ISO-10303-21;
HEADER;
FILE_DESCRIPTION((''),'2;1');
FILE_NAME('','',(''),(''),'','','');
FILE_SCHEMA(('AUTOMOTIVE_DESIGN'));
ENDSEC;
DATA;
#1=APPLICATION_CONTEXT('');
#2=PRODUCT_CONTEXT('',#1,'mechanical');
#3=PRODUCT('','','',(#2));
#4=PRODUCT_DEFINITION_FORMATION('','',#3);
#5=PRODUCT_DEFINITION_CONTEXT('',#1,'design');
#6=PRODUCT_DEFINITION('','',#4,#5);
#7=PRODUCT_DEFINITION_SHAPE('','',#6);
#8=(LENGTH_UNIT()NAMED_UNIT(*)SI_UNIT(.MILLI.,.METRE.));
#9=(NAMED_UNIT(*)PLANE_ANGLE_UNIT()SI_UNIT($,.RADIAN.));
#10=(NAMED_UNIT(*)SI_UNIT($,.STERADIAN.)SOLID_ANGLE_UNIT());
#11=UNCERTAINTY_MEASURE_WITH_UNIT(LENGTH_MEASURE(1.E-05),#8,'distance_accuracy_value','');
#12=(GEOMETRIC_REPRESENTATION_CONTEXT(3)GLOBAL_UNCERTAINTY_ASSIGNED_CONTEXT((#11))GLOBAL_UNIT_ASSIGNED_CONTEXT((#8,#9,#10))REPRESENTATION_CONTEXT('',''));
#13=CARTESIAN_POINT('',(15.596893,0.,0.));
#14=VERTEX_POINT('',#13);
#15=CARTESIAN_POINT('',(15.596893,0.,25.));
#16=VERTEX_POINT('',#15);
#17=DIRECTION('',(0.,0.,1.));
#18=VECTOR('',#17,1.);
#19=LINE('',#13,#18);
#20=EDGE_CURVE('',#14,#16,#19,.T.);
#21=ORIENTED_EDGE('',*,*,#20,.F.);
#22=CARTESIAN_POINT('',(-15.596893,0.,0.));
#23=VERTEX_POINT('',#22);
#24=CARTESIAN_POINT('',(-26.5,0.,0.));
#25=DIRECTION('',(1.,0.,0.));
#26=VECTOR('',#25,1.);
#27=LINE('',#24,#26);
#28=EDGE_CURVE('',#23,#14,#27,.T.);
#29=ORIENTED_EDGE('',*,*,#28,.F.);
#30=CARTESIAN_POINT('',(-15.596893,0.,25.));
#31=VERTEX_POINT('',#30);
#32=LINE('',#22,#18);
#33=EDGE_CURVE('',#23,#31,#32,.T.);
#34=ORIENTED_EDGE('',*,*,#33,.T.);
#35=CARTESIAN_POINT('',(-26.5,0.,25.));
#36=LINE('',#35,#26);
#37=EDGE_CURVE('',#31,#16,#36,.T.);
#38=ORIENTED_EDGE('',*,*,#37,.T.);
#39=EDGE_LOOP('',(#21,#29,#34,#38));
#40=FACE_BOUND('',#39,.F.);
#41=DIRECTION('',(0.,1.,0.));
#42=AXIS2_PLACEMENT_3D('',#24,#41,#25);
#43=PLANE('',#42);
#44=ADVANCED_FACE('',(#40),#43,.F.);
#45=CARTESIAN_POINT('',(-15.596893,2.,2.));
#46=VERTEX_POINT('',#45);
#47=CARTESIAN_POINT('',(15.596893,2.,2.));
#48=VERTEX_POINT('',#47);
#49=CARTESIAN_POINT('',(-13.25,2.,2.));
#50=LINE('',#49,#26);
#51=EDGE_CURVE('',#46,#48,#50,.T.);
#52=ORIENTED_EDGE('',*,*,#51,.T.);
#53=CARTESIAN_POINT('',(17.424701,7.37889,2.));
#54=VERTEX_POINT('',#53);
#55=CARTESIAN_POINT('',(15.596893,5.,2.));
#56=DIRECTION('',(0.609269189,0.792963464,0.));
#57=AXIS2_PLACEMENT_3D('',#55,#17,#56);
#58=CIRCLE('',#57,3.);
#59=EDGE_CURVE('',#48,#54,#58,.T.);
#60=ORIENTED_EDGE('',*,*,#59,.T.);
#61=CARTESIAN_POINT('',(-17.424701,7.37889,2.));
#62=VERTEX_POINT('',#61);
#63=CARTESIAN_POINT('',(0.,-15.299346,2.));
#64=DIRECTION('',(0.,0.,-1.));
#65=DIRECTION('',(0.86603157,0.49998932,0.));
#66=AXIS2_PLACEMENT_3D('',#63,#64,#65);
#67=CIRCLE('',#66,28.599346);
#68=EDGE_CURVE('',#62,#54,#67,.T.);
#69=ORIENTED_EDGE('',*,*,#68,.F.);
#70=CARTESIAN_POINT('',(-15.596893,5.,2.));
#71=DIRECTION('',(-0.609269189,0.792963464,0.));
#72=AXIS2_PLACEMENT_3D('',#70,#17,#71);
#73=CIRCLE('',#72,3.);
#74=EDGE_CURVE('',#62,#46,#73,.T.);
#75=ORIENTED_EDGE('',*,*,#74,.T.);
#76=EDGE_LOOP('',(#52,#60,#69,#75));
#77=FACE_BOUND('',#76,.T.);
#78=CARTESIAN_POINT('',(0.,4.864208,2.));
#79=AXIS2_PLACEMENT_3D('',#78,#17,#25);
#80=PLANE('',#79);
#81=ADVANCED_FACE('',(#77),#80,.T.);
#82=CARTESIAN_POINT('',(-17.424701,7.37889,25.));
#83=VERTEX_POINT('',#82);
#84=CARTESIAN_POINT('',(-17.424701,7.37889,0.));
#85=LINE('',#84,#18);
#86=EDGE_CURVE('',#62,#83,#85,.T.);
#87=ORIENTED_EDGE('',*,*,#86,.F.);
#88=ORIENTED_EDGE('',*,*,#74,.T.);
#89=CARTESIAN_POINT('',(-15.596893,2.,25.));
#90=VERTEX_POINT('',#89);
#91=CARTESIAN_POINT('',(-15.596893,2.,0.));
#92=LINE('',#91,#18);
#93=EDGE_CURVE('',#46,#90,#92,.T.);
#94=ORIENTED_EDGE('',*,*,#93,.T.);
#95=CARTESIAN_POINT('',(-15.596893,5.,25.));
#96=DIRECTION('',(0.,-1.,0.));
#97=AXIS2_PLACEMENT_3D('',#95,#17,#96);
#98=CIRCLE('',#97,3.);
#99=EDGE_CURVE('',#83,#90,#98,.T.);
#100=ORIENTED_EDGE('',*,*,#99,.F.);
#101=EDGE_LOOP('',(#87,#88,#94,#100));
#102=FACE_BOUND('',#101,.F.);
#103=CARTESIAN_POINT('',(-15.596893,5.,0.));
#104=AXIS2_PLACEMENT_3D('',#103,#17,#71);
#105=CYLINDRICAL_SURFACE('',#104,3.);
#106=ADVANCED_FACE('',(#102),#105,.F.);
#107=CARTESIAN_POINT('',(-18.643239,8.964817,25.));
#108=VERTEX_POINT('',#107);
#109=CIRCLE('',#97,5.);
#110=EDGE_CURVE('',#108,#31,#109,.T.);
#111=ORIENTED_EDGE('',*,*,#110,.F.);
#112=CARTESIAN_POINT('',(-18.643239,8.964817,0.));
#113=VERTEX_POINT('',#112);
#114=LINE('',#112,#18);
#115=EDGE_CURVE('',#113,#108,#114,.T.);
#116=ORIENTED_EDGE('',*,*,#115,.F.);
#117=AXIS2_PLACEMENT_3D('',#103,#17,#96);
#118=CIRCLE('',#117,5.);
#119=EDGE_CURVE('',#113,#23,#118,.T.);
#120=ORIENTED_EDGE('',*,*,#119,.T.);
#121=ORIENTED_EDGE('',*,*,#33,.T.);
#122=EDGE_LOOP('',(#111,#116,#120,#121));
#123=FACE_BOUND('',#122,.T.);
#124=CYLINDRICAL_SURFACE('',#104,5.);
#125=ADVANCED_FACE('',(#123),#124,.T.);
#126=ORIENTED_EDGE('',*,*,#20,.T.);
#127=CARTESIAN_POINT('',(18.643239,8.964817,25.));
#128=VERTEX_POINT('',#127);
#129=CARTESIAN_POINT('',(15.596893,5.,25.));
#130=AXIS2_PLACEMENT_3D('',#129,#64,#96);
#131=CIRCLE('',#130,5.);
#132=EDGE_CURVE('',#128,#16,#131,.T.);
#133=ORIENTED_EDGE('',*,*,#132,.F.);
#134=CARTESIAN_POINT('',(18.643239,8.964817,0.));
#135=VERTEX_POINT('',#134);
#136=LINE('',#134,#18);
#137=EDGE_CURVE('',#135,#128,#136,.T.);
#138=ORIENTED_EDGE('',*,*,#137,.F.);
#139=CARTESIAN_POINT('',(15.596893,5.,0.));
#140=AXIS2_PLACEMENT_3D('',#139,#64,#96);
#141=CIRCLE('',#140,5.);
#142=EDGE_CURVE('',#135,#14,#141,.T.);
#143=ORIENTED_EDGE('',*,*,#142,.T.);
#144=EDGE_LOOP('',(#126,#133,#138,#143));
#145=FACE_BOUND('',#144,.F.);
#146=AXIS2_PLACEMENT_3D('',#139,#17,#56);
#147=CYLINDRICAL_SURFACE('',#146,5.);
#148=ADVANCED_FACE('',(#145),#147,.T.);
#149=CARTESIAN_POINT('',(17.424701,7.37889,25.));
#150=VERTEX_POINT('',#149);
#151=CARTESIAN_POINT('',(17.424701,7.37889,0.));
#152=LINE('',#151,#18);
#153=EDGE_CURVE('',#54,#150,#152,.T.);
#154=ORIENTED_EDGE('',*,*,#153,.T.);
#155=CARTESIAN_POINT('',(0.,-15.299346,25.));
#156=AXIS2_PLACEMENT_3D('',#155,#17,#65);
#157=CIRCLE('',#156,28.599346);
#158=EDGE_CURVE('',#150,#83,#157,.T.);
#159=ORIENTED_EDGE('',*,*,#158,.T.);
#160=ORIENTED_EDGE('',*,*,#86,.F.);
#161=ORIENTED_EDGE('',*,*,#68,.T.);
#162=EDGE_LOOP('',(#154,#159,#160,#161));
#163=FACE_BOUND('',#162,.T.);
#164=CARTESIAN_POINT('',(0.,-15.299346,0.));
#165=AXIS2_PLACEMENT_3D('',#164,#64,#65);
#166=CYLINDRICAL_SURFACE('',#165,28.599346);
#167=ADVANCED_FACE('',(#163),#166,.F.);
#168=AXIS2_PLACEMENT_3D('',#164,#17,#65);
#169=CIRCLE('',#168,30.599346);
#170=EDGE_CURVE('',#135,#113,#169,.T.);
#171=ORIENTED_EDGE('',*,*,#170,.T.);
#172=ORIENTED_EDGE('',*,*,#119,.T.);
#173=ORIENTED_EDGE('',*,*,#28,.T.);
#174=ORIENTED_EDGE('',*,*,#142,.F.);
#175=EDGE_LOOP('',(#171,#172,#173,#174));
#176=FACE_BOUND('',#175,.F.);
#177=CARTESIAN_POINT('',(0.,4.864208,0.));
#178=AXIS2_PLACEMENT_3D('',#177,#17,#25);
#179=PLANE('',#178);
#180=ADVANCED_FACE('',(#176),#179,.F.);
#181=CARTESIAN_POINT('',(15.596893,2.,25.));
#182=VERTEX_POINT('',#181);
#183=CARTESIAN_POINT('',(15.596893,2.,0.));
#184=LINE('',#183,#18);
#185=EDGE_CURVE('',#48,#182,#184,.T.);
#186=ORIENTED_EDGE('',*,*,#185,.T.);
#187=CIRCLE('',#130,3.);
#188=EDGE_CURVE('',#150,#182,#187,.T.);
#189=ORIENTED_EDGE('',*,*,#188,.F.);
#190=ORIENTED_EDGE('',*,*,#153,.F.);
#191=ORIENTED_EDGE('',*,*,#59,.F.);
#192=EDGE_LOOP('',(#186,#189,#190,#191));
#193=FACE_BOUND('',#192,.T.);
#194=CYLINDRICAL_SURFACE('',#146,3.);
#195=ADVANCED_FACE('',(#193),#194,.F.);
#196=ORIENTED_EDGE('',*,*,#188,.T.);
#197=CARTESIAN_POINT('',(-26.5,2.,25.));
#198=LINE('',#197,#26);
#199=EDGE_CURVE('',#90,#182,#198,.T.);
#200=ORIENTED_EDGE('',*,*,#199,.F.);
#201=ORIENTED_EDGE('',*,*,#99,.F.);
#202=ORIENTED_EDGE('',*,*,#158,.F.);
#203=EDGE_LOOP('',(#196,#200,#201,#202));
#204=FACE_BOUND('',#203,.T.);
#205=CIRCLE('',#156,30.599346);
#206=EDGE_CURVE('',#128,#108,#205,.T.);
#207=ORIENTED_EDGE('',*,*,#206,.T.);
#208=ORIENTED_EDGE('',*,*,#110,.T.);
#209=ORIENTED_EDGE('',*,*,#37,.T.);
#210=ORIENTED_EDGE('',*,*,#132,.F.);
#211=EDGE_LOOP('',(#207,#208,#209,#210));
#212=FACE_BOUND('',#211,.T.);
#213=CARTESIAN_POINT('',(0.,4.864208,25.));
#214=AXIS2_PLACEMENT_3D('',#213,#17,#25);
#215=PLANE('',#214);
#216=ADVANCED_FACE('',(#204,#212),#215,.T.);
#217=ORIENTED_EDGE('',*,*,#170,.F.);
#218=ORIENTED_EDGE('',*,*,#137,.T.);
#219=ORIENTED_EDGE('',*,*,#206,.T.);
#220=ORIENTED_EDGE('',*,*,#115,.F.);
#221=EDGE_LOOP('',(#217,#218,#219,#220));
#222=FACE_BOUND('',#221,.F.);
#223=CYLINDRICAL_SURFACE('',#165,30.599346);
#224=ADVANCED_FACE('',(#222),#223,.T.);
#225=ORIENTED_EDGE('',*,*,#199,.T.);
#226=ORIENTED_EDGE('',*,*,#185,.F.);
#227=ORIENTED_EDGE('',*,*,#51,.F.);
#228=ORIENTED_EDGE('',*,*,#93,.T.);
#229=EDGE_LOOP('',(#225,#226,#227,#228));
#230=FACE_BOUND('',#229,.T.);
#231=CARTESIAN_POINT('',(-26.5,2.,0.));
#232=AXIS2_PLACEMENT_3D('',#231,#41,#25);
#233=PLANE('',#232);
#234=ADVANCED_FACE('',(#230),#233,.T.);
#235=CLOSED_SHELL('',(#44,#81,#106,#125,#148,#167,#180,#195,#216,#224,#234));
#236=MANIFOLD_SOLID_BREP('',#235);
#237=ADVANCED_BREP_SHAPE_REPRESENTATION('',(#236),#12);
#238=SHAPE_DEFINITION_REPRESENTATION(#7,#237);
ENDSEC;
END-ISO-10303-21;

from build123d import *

# Parameters (mm, degrees)
F1_DEPTH = 25
F2_R     = 5
F3_T     = -2


with BuildPart() as f1:
    # F0 (on Top) → F1 (new body)
    with BuildSketch(Plane.XY):
        with BuildLine():
            ThreePointArc((26.5, 0), (0, 15.3), (-26.5, 0))
            Line((-26.5, 0), (26.5, 0))
        make_face()
    extrude(amount=F1_DEPTH)

    # F2
    f2_edges = [f1.edges().sort_by_distance(p)[0] for p in [
        (-26.5, 0, 12.5),
        (26.5, 0, 12.5),
    ]]
    fillet(f2_edges, radius=F2_R)

    # F3
    f3_openings = [f1.faces().sort_by_distance(p)[0] for p in [
        (0, 6.722431, 25),
    ]]
    offset(amount=F3_T, openings=f3_openings)


solid = f1.part
